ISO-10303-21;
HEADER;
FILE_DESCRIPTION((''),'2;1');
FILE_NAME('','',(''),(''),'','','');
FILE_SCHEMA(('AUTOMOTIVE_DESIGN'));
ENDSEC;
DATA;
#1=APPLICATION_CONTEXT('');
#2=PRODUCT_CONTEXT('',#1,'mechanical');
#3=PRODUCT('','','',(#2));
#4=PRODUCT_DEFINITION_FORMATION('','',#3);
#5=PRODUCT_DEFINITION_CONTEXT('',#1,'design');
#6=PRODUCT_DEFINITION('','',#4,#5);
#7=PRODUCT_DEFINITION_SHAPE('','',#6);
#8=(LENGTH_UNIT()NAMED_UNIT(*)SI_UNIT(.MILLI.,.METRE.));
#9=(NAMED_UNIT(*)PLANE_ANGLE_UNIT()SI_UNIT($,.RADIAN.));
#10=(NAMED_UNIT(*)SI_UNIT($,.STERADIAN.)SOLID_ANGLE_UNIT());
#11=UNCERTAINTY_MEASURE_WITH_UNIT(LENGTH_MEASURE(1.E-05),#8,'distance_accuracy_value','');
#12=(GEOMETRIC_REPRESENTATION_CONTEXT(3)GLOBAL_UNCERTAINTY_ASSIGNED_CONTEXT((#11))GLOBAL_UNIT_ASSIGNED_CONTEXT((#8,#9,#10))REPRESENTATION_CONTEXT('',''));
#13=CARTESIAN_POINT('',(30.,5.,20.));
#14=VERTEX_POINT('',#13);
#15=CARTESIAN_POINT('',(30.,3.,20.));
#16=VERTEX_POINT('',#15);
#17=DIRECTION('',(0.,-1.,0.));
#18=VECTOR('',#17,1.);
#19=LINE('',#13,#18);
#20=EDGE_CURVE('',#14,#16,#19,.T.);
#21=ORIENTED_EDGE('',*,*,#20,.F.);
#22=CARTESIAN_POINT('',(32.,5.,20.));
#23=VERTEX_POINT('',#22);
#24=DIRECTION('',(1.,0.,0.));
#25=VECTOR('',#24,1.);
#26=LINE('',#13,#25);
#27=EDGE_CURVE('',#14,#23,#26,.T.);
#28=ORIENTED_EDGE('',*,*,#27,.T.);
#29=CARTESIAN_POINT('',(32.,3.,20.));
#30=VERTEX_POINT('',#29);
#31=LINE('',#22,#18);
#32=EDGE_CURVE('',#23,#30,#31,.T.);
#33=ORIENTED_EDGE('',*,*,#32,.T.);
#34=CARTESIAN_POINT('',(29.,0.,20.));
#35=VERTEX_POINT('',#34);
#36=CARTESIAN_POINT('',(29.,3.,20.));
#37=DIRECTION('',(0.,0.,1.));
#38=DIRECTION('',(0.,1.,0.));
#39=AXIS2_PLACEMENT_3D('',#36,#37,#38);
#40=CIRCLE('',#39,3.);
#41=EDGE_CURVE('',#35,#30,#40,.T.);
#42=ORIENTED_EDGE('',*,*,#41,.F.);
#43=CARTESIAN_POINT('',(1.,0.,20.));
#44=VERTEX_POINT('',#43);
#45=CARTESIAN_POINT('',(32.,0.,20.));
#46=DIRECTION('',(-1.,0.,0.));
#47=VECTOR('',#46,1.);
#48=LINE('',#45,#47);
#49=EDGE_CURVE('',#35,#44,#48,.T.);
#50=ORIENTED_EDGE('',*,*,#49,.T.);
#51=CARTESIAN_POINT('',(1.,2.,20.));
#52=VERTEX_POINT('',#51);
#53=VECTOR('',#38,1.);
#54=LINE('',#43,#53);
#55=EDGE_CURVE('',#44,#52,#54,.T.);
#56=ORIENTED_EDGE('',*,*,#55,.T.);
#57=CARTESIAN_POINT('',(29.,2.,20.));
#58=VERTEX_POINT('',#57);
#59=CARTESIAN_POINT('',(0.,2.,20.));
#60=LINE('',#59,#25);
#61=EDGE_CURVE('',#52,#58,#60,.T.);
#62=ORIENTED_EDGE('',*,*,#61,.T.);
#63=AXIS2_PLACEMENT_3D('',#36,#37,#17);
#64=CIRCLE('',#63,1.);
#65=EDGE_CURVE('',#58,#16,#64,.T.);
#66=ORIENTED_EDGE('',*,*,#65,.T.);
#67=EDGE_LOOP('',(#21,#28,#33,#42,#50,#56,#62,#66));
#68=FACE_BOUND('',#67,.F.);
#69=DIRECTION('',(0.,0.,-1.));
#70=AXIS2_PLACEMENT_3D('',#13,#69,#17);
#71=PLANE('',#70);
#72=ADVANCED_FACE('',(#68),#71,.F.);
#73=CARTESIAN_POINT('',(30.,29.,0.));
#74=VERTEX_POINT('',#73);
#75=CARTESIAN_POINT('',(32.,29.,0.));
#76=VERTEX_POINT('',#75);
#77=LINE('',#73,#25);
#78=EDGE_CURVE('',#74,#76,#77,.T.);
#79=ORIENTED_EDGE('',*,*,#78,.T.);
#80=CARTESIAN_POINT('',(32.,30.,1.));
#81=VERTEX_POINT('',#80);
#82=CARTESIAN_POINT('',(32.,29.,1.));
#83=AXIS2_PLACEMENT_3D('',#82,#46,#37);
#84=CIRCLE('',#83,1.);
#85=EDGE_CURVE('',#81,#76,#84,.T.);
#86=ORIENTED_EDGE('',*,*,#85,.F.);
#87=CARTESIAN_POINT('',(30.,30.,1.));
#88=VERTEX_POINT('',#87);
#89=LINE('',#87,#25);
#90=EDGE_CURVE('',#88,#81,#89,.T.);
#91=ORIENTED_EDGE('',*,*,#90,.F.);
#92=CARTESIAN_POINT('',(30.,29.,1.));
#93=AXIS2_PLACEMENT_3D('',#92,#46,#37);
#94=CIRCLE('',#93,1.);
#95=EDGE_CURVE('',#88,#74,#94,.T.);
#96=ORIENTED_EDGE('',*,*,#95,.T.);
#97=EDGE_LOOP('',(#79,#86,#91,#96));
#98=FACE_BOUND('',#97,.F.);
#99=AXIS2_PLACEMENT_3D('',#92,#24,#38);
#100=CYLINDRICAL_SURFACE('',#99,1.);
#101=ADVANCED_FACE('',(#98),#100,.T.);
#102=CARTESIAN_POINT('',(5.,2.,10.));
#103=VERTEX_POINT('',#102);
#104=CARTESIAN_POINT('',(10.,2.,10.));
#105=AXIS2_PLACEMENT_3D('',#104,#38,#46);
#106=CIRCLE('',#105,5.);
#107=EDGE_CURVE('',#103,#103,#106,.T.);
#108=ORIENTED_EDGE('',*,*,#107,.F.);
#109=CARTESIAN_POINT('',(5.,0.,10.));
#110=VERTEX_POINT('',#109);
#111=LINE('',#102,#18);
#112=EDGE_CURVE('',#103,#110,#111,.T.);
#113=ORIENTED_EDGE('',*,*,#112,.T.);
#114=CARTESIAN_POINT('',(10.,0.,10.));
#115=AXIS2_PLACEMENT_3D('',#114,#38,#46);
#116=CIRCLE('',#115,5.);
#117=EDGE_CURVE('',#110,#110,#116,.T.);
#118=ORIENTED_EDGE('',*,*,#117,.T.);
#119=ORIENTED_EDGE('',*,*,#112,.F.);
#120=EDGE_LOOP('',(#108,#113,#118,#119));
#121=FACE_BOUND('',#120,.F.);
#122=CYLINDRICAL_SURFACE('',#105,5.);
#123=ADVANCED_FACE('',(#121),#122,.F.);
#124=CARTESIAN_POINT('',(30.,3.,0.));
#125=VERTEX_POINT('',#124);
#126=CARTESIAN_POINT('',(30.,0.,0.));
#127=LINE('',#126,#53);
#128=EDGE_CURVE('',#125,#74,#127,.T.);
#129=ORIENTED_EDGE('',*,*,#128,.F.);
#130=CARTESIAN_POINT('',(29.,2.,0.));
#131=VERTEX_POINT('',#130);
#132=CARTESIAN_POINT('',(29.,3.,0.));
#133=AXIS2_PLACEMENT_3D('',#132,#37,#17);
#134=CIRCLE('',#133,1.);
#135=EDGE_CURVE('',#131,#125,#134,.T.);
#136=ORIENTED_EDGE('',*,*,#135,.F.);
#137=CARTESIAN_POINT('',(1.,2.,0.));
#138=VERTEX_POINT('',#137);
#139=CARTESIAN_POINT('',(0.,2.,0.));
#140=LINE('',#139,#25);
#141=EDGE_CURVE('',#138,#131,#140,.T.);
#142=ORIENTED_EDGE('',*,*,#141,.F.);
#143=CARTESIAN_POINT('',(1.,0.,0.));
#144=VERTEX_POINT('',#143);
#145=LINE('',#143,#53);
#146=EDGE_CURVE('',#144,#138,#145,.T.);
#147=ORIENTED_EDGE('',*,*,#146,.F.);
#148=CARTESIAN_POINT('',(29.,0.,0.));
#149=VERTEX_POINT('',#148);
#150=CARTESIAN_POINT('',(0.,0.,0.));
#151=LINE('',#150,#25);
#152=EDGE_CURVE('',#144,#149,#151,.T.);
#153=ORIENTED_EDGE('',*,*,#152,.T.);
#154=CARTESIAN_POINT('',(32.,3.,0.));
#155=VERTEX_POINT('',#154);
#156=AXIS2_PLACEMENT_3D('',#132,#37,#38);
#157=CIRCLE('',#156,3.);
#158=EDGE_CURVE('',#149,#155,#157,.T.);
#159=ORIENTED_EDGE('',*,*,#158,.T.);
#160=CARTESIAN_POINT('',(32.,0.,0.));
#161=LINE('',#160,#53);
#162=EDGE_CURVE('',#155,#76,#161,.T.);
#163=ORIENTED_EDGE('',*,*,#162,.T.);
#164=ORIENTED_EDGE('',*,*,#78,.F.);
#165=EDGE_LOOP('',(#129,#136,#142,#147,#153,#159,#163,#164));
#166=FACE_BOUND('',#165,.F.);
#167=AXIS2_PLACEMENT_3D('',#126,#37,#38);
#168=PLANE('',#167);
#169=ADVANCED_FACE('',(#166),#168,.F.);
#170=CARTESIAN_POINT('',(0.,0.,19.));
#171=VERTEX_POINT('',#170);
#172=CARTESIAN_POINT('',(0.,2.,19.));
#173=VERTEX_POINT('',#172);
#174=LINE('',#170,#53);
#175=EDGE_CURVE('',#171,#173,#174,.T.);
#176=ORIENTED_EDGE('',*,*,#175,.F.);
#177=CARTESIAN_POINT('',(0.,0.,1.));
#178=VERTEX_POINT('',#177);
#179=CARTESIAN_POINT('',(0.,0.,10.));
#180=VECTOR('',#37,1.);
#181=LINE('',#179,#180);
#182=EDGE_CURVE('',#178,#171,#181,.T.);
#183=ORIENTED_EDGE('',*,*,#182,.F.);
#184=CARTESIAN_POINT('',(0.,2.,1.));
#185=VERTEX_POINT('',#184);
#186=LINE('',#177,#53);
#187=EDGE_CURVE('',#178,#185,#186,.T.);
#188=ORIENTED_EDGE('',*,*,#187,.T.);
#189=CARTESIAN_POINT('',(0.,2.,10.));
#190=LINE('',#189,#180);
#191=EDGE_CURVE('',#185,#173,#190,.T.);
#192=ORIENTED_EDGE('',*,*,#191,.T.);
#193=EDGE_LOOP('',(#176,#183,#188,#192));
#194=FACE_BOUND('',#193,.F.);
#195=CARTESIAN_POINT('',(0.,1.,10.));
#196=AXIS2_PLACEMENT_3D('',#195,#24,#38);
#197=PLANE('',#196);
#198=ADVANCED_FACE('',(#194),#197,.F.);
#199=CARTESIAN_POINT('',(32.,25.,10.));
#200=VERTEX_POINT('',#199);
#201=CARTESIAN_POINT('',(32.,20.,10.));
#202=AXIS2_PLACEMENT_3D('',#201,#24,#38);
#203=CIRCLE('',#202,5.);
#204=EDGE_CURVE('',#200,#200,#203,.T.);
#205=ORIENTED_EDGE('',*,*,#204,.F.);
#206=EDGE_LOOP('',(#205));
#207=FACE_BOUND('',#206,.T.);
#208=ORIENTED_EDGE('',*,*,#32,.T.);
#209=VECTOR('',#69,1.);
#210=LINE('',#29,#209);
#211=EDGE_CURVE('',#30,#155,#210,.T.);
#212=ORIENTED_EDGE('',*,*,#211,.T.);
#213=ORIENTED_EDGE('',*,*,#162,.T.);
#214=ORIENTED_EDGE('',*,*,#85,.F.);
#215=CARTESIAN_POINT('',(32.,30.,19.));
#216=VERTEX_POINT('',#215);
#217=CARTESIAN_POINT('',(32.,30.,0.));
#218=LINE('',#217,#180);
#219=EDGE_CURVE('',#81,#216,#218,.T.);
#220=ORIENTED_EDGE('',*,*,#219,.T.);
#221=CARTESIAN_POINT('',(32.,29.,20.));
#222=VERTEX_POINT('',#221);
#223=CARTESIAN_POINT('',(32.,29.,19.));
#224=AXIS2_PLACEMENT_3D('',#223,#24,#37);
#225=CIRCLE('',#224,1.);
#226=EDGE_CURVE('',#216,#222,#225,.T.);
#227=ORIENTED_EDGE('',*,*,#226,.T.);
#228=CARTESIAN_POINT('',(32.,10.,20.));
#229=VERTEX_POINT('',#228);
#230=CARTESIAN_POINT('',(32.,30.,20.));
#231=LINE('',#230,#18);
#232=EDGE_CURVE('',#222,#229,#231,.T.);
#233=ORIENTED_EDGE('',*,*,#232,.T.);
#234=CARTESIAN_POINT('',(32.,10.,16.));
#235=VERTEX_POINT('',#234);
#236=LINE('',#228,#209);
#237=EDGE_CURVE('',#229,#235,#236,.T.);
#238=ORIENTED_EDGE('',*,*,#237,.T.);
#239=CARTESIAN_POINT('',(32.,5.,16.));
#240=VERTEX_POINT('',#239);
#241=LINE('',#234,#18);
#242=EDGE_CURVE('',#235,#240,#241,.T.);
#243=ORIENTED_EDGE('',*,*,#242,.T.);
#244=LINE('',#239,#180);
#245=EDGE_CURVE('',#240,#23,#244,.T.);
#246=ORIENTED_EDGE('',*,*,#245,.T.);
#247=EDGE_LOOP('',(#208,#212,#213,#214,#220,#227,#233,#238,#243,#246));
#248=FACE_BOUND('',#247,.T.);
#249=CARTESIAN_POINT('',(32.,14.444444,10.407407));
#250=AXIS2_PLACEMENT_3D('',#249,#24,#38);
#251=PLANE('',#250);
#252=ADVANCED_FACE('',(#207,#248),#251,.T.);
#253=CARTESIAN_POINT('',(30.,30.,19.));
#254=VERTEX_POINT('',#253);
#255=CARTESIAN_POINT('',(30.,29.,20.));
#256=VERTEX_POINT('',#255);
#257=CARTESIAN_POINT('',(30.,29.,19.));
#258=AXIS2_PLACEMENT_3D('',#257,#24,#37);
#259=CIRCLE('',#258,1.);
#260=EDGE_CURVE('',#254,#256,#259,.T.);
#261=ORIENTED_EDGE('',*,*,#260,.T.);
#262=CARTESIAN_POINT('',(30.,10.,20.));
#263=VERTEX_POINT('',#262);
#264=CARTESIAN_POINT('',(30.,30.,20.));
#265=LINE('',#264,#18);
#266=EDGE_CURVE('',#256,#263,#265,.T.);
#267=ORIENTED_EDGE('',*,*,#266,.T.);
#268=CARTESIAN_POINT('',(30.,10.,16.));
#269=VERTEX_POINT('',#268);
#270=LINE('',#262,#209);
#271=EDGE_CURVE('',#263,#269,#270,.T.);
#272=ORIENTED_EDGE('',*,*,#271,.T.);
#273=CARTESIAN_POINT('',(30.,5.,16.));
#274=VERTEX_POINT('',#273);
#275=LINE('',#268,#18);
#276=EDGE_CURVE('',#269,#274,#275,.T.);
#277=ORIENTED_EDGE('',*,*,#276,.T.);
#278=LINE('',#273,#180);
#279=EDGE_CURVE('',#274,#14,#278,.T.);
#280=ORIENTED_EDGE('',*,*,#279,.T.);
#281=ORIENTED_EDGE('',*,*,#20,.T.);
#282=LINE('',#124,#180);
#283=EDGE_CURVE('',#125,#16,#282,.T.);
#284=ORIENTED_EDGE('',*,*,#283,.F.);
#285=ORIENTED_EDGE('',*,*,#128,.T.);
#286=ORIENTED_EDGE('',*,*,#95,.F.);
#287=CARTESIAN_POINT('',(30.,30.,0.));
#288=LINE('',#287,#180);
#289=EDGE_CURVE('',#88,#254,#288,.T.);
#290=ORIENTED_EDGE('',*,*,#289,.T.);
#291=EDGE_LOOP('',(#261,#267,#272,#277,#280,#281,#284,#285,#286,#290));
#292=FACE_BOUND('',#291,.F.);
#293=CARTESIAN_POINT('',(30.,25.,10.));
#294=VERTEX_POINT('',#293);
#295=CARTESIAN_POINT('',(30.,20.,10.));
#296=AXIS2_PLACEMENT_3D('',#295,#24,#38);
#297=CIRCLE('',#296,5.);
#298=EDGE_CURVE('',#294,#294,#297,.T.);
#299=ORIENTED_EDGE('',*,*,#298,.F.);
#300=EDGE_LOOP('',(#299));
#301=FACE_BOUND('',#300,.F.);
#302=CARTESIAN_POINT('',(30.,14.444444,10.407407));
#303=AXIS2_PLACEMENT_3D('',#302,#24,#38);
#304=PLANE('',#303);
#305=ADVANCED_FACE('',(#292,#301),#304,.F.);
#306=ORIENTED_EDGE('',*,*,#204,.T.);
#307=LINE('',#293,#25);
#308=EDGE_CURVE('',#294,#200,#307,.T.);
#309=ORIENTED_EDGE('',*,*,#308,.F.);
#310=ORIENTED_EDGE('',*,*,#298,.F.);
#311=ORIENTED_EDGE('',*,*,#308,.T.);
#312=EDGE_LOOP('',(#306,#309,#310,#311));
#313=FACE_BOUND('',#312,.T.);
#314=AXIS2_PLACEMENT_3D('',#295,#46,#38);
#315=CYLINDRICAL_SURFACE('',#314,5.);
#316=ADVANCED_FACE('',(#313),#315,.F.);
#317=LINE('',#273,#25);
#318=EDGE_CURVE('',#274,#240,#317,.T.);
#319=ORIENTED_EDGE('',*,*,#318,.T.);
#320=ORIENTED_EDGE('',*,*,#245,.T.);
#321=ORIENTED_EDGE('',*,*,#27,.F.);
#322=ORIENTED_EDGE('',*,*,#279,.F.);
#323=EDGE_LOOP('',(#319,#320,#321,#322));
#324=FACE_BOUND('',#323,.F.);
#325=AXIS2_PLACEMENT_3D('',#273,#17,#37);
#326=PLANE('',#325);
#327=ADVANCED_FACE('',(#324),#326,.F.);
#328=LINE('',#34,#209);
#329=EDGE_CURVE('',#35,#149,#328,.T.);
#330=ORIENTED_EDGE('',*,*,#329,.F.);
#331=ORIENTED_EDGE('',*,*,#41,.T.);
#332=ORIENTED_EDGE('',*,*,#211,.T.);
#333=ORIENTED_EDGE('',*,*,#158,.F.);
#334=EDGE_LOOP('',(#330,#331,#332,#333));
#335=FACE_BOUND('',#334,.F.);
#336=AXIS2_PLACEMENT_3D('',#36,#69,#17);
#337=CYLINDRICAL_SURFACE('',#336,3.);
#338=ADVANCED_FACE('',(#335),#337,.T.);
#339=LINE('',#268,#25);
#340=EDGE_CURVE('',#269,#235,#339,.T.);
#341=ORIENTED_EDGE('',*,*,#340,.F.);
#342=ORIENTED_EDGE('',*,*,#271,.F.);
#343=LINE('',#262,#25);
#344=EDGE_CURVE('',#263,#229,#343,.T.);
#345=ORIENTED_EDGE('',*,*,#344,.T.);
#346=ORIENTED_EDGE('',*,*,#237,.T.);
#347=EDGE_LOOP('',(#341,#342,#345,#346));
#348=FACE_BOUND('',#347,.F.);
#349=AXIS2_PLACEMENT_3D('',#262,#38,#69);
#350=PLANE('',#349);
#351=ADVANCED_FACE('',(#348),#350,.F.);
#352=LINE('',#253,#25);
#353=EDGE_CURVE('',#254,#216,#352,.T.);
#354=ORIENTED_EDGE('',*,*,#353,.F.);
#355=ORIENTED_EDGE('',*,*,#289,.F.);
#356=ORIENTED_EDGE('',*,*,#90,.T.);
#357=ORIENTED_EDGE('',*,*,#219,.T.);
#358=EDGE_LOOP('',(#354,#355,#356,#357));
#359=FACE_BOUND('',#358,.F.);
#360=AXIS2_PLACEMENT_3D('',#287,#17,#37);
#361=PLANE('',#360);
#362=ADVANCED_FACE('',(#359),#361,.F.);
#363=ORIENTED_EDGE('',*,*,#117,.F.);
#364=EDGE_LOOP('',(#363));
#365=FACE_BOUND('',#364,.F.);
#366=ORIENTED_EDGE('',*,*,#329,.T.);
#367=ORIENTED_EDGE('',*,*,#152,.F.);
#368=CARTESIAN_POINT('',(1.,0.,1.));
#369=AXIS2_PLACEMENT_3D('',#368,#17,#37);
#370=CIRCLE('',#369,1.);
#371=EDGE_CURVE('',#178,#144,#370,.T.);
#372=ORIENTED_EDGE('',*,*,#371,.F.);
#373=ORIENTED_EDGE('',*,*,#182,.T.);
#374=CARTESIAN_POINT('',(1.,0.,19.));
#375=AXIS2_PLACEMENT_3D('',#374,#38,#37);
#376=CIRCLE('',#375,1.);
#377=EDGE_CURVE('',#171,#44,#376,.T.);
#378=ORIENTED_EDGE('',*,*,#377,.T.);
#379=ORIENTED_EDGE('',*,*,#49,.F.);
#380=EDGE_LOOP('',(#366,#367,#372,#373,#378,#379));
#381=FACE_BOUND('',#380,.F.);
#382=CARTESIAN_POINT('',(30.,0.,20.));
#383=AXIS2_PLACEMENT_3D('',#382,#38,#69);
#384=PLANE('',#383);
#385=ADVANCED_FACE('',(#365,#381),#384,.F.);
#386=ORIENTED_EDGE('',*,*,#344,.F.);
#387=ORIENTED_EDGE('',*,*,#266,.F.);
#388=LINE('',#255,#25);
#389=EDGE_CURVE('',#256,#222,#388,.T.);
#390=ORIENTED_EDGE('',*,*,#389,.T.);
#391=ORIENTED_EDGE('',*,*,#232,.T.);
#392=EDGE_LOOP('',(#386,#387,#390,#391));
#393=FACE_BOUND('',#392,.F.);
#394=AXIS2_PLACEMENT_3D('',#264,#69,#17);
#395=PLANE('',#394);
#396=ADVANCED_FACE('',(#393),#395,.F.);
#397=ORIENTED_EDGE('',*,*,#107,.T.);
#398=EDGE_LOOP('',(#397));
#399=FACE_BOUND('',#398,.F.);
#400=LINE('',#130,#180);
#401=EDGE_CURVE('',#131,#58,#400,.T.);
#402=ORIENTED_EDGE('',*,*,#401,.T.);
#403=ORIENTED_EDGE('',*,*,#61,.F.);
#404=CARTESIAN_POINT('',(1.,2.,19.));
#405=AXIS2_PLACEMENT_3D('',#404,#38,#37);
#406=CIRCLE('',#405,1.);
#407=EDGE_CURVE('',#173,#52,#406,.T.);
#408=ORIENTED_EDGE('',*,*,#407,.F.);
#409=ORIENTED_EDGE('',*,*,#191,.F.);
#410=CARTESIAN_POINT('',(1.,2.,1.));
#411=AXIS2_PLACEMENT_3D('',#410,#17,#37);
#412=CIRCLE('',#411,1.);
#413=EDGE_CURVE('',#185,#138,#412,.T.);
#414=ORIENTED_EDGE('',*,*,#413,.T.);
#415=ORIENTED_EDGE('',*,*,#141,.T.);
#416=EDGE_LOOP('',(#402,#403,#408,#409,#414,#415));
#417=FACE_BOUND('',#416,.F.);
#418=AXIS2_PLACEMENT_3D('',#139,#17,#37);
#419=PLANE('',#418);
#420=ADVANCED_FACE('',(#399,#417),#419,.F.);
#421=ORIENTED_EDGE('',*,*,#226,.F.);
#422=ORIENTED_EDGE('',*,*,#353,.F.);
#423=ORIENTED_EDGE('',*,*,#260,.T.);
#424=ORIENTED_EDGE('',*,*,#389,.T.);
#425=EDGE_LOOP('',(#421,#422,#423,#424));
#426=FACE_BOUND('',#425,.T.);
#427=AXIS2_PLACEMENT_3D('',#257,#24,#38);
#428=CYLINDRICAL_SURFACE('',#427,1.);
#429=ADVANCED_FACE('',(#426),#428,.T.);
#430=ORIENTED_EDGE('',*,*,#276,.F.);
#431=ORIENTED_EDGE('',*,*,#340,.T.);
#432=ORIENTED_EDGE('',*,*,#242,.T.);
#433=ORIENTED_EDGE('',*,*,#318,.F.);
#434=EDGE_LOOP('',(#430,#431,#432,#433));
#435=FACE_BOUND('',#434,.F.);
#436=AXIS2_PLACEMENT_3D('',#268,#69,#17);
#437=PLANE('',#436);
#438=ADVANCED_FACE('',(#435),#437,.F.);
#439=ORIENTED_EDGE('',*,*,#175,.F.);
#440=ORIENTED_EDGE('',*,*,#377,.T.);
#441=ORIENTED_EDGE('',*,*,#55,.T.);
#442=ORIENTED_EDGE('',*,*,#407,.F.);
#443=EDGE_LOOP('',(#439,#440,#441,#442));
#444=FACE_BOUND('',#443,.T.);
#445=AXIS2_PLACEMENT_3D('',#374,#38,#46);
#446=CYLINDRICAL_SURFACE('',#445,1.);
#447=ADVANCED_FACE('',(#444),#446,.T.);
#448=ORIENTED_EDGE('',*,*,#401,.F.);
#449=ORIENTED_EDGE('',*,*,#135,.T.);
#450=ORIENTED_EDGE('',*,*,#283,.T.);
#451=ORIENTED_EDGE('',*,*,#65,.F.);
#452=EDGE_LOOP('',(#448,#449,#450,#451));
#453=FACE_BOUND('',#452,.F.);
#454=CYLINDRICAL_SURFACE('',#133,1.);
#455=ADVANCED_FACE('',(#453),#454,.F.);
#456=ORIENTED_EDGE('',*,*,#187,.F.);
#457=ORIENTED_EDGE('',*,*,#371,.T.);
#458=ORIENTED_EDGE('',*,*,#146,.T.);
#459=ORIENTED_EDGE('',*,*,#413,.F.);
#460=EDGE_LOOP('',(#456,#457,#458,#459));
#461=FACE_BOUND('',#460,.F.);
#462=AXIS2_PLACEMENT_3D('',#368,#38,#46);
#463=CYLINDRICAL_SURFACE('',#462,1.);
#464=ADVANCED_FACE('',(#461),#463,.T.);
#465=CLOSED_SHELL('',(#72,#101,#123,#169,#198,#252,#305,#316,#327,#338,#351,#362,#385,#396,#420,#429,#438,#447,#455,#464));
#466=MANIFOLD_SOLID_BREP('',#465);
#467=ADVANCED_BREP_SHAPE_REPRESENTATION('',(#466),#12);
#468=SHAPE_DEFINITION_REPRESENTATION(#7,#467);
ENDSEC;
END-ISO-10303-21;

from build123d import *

# Parameters (mm, degrees)
F0_W     = 2
F0_H     = 20
F1_DEPTH = 30
F2_R     = 5
F3_DEPTH = 2
F4_R     = 5
F5_DEPTH = 2
F6_R     = 1
F7_R     = 3


with BuildPart() as f1:
    # F0 (on Right) → F1 (new body)
    with BuildSketch(Plane.YZ):
        with Locations((1, 10)):
            Rectangle(F0_W, F0_H)
    extrude(amount=F1_DEPTH)

    # F2 (on face) → F3 (cut)
    with BuildSketch(Plane(origin=(0, 2, 0), x_dir=(-1, 0, 0), z_dir=(0, 1, 0))):
        with Locations((-10, 10)):
            Circle(F2_R)
    extrude(amount=-F3_DEPTH, mode=Mode.SUBTRACT)

    # F4 (on face) → F5 (join)
    with BuildSketch(Plane.YZ.offset(30)):
        Polygon((0, 20), (0, 0), (30, 0), (30, 20), (10, 20), (10, 16), (5, 16), (5, 20), align=None)
        with Locations((20, 10)):
            Circle(F4_R, mode=Mode.SUBTRACT)
    extrude(amount=F5_DEPTH)

    # F6
    f6_edges = [f1.edges().sort_by_distance(p)[0] for p in [
        (30, 2, 10),
        (31, 30, 0),
        (0, 1, 20),
        (0, 1, 0),
        (31, 30, 20),
    ]]
    fillet(f6_edges, radius=F6_R)

    # F7
    f7_edges = [f1.edges().sort_by_distance(p)[0] for p in [
        (32, 0, 10),
    ]]
    fillet(f7_edges, radius=F7_R)


solid = f1.part
